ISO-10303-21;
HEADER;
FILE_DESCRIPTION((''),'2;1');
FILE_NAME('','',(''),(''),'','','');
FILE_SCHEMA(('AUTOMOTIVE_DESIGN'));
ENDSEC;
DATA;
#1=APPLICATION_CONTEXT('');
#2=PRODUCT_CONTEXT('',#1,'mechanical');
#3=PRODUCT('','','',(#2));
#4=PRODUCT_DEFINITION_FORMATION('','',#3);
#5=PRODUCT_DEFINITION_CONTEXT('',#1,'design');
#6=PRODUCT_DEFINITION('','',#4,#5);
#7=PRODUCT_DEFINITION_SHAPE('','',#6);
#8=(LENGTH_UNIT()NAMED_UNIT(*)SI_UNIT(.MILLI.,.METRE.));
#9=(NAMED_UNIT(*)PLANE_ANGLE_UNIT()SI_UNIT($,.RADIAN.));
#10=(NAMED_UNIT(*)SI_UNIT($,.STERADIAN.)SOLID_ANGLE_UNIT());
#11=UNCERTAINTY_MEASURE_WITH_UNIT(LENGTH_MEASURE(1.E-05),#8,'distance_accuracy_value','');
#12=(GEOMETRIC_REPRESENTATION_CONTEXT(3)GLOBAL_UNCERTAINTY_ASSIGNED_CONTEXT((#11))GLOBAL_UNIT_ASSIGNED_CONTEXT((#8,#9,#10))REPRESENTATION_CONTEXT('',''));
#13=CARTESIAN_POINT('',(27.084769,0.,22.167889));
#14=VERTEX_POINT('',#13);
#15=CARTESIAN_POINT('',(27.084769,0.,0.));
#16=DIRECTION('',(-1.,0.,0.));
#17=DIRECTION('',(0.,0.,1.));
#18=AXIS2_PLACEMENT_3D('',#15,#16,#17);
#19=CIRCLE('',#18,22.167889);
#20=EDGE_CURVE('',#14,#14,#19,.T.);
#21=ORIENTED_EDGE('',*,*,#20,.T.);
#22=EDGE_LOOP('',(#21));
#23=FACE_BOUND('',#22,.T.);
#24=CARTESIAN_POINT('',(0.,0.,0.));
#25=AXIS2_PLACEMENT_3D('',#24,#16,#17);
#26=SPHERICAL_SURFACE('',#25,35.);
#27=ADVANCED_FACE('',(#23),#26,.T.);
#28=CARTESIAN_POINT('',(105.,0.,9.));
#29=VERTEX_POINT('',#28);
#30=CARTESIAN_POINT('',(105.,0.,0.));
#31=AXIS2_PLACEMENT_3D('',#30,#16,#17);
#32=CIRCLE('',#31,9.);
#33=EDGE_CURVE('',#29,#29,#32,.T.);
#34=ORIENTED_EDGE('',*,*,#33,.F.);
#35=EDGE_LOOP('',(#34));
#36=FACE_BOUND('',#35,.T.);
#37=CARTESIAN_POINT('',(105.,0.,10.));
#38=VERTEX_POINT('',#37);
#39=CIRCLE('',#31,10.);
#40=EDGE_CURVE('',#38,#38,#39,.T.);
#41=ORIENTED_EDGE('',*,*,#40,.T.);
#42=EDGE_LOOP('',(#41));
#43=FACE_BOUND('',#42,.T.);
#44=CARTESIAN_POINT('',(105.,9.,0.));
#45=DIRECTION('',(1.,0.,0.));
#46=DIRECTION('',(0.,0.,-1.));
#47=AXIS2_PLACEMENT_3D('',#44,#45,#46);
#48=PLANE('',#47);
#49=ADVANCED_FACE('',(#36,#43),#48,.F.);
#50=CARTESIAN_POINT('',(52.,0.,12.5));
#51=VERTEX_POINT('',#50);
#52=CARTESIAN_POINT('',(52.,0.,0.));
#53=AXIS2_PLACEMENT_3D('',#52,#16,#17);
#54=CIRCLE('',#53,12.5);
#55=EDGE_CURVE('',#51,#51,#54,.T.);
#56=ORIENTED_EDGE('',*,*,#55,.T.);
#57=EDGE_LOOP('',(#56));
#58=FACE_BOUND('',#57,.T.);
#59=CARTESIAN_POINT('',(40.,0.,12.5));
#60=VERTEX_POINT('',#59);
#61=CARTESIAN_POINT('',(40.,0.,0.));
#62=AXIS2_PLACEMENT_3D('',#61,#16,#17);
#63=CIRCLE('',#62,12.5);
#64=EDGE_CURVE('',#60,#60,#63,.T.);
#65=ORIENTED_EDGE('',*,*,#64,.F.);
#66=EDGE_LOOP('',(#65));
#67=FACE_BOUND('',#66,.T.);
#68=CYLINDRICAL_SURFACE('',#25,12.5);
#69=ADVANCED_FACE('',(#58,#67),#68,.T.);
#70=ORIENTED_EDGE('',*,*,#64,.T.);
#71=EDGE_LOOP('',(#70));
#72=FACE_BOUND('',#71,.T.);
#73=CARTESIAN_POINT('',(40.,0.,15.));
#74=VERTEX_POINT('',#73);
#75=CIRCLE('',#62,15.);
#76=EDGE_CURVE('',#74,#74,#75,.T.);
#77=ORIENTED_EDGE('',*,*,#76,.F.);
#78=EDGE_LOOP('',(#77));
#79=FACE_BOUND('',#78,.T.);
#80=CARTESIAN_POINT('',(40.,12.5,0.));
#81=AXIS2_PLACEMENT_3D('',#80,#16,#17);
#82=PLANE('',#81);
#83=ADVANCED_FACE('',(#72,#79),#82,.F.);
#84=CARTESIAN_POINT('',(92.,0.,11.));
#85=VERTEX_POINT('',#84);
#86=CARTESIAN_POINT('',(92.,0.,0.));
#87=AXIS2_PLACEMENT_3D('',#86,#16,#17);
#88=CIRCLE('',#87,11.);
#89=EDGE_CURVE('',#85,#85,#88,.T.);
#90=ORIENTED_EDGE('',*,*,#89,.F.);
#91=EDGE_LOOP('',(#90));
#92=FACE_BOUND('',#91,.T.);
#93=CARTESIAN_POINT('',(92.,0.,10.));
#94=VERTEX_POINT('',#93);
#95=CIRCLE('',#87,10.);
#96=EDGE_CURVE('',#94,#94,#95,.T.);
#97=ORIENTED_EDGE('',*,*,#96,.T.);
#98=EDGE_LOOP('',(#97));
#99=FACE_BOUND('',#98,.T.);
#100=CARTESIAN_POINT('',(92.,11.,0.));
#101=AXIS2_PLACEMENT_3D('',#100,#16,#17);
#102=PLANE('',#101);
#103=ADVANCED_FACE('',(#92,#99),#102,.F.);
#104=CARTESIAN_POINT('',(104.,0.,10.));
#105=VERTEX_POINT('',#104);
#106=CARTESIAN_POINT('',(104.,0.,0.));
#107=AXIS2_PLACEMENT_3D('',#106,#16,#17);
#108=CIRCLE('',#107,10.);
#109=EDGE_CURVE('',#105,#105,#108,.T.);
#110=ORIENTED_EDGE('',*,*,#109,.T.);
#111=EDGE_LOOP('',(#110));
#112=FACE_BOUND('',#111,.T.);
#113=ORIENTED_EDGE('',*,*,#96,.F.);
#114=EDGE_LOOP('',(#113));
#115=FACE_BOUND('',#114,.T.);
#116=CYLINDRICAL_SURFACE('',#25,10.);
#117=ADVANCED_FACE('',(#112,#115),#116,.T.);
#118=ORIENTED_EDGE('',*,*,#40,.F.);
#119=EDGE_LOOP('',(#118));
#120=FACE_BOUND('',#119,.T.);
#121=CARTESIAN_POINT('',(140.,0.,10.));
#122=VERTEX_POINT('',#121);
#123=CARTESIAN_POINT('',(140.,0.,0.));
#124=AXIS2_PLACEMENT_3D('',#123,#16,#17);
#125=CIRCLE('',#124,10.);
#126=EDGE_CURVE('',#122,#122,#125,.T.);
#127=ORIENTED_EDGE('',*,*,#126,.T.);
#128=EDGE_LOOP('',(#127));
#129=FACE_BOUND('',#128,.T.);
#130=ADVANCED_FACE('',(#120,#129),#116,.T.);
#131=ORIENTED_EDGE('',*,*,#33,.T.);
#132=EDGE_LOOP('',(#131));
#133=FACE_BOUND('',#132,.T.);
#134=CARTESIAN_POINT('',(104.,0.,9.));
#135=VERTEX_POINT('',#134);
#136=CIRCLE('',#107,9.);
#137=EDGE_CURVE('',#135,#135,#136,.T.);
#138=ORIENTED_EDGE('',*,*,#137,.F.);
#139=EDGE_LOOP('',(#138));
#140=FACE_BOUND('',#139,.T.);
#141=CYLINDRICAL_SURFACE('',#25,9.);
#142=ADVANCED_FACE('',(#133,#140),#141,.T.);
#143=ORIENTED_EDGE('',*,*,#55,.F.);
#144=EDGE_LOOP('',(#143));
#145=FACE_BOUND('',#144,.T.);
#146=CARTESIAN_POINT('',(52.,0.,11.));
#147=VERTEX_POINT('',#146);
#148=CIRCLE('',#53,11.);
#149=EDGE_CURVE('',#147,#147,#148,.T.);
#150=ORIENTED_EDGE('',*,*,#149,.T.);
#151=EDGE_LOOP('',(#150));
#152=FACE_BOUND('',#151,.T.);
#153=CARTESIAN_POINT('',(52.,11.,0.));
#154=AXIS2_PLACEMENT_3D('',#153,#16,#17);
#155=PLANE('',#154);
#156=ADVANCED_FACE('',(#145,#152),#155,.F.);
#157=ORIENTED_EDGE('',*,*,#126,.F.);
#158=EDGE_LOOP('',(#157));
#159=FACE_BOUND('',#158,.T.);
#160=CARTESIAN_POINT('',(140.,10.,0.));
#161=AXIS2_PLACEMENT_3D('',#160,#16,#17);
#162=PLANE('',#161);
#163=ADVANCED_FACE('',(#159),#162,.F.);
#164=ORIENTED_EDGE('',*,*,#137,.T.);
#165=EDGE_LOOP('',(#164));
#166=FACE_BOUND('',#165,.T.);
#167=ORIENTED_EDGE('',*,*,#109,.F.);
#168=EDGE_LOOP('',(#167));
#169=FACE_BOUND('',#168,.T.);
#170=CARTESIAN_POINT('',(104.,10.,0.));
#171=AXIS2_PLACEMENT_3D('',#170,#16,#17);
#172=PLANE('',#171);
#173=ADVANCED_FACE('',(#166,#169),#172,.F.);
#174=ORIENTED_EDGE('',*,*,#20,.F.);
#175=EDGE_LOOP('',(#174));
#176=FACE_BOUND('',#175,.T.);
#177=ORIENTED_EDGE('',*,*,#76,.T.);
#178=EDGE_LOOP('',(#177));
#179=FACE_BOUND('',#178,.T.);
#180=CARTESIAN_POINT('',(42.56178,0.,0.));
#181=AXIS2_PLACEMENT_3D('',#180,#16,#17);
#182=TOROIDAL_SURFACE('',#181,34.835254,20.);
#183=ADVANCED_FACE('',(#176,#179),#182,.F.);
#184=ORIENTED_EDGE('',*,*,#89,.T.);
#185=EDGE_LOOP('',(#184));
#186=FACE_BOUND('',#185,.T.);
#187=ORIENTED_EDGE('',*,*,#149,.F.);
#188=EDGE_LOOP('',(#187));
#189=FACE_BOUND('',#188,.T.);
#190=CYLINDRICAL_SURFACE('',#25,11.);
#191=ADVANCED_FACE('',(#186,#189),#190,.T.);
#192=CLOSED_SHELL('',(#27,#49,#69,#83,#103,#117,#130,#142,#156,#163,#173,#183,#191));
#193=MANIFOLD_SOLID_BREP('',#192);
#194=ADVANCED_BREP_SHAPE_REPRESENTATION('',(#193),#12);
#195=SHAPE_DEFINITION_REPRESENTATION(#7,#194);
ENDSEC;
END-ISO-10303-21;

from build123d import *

# Parameters (mm, degrees)
FILLET1_R = 20


with BuildPart() as part:
    # Sketch1 → Revolve1 (revolve)
    with BuildSketch(Plane.XY):
        with BuildLine():
            Line((0, 35), (0, -35))
            ThreePointArc((0, -35), (-35, 0), (0, 35))
        make_face()
    revolve(axis=Axis((0, 35, 0), (0, -1, 0)))

    # Sketch2 → Revolve2 (revolve)
    with BuildSketch(Plane.XY, mode=Mode.PRIVATE) as revolve2_sk:
        with BuildLine():
            Line((52, 11), (92, 11))
            Line((92, 11), (92, 10))
            Line((92, 10), (104, 10))
            Line((104, 10), (104, 9))
            Line((104, 9), (105, 9))
            Line((105, 9), (105, 10))
            Line((105, 10), (140, 10))
            Line((140, 10), (140, 0))
            Line((140, 0), (35, 0))
            ThreePointArc((35, 0), (34.145257219, 7.687744108), (31.622776602, 15))
            Line((31.622776602, 15), (40, 15))
            Line((40, 15), (40, 12.5))
            Line((40, 12.5), (52, 12.5))
            Line((52, 12.5), (52, 11))
        make_face()
    revolve(revolve2_sk.sketch.rotate(Axis((0, 0, 0), (1, 0, 0)), 90), axis=Axis((0, 0, 0), (1, 0, 0)))

    # Fillet1
    # the kernel refuses this fillet: 20 mm, written as the material it adds along each edge
    with BuildSketch(Plane(origin=(31.622776602, 0, 0), x_dir=(0, 0, 1), z_dir=(0, 1, 0))) as fillet1_piece_1:
        with BuildLine():
            CenterArc((34.835253557, 10.939003315), FILLET1_R, 187.359176617, 43.341758227)
            Line((15, 8.377223398), (14.603294929, 8.3259878))
            ThreePointArc((14.603294929, 8.3259878), (14.6, 4.188611699), (14.6, 0))
            Line((14.6, 0), (14.828571429, -0.361403161))
            ThreePointArc((14.828571429, -0.361403161), (18.507983606, -2.388985489), (21.914541328, -4.847547782))
            Line((21.914541328, -4.847547782), (22.167888627, -4.538007564))
        make_face()
    revolve(axis=Axis((31.622776602, 0, 0), (1, 0, 0)))


solid = part.part
